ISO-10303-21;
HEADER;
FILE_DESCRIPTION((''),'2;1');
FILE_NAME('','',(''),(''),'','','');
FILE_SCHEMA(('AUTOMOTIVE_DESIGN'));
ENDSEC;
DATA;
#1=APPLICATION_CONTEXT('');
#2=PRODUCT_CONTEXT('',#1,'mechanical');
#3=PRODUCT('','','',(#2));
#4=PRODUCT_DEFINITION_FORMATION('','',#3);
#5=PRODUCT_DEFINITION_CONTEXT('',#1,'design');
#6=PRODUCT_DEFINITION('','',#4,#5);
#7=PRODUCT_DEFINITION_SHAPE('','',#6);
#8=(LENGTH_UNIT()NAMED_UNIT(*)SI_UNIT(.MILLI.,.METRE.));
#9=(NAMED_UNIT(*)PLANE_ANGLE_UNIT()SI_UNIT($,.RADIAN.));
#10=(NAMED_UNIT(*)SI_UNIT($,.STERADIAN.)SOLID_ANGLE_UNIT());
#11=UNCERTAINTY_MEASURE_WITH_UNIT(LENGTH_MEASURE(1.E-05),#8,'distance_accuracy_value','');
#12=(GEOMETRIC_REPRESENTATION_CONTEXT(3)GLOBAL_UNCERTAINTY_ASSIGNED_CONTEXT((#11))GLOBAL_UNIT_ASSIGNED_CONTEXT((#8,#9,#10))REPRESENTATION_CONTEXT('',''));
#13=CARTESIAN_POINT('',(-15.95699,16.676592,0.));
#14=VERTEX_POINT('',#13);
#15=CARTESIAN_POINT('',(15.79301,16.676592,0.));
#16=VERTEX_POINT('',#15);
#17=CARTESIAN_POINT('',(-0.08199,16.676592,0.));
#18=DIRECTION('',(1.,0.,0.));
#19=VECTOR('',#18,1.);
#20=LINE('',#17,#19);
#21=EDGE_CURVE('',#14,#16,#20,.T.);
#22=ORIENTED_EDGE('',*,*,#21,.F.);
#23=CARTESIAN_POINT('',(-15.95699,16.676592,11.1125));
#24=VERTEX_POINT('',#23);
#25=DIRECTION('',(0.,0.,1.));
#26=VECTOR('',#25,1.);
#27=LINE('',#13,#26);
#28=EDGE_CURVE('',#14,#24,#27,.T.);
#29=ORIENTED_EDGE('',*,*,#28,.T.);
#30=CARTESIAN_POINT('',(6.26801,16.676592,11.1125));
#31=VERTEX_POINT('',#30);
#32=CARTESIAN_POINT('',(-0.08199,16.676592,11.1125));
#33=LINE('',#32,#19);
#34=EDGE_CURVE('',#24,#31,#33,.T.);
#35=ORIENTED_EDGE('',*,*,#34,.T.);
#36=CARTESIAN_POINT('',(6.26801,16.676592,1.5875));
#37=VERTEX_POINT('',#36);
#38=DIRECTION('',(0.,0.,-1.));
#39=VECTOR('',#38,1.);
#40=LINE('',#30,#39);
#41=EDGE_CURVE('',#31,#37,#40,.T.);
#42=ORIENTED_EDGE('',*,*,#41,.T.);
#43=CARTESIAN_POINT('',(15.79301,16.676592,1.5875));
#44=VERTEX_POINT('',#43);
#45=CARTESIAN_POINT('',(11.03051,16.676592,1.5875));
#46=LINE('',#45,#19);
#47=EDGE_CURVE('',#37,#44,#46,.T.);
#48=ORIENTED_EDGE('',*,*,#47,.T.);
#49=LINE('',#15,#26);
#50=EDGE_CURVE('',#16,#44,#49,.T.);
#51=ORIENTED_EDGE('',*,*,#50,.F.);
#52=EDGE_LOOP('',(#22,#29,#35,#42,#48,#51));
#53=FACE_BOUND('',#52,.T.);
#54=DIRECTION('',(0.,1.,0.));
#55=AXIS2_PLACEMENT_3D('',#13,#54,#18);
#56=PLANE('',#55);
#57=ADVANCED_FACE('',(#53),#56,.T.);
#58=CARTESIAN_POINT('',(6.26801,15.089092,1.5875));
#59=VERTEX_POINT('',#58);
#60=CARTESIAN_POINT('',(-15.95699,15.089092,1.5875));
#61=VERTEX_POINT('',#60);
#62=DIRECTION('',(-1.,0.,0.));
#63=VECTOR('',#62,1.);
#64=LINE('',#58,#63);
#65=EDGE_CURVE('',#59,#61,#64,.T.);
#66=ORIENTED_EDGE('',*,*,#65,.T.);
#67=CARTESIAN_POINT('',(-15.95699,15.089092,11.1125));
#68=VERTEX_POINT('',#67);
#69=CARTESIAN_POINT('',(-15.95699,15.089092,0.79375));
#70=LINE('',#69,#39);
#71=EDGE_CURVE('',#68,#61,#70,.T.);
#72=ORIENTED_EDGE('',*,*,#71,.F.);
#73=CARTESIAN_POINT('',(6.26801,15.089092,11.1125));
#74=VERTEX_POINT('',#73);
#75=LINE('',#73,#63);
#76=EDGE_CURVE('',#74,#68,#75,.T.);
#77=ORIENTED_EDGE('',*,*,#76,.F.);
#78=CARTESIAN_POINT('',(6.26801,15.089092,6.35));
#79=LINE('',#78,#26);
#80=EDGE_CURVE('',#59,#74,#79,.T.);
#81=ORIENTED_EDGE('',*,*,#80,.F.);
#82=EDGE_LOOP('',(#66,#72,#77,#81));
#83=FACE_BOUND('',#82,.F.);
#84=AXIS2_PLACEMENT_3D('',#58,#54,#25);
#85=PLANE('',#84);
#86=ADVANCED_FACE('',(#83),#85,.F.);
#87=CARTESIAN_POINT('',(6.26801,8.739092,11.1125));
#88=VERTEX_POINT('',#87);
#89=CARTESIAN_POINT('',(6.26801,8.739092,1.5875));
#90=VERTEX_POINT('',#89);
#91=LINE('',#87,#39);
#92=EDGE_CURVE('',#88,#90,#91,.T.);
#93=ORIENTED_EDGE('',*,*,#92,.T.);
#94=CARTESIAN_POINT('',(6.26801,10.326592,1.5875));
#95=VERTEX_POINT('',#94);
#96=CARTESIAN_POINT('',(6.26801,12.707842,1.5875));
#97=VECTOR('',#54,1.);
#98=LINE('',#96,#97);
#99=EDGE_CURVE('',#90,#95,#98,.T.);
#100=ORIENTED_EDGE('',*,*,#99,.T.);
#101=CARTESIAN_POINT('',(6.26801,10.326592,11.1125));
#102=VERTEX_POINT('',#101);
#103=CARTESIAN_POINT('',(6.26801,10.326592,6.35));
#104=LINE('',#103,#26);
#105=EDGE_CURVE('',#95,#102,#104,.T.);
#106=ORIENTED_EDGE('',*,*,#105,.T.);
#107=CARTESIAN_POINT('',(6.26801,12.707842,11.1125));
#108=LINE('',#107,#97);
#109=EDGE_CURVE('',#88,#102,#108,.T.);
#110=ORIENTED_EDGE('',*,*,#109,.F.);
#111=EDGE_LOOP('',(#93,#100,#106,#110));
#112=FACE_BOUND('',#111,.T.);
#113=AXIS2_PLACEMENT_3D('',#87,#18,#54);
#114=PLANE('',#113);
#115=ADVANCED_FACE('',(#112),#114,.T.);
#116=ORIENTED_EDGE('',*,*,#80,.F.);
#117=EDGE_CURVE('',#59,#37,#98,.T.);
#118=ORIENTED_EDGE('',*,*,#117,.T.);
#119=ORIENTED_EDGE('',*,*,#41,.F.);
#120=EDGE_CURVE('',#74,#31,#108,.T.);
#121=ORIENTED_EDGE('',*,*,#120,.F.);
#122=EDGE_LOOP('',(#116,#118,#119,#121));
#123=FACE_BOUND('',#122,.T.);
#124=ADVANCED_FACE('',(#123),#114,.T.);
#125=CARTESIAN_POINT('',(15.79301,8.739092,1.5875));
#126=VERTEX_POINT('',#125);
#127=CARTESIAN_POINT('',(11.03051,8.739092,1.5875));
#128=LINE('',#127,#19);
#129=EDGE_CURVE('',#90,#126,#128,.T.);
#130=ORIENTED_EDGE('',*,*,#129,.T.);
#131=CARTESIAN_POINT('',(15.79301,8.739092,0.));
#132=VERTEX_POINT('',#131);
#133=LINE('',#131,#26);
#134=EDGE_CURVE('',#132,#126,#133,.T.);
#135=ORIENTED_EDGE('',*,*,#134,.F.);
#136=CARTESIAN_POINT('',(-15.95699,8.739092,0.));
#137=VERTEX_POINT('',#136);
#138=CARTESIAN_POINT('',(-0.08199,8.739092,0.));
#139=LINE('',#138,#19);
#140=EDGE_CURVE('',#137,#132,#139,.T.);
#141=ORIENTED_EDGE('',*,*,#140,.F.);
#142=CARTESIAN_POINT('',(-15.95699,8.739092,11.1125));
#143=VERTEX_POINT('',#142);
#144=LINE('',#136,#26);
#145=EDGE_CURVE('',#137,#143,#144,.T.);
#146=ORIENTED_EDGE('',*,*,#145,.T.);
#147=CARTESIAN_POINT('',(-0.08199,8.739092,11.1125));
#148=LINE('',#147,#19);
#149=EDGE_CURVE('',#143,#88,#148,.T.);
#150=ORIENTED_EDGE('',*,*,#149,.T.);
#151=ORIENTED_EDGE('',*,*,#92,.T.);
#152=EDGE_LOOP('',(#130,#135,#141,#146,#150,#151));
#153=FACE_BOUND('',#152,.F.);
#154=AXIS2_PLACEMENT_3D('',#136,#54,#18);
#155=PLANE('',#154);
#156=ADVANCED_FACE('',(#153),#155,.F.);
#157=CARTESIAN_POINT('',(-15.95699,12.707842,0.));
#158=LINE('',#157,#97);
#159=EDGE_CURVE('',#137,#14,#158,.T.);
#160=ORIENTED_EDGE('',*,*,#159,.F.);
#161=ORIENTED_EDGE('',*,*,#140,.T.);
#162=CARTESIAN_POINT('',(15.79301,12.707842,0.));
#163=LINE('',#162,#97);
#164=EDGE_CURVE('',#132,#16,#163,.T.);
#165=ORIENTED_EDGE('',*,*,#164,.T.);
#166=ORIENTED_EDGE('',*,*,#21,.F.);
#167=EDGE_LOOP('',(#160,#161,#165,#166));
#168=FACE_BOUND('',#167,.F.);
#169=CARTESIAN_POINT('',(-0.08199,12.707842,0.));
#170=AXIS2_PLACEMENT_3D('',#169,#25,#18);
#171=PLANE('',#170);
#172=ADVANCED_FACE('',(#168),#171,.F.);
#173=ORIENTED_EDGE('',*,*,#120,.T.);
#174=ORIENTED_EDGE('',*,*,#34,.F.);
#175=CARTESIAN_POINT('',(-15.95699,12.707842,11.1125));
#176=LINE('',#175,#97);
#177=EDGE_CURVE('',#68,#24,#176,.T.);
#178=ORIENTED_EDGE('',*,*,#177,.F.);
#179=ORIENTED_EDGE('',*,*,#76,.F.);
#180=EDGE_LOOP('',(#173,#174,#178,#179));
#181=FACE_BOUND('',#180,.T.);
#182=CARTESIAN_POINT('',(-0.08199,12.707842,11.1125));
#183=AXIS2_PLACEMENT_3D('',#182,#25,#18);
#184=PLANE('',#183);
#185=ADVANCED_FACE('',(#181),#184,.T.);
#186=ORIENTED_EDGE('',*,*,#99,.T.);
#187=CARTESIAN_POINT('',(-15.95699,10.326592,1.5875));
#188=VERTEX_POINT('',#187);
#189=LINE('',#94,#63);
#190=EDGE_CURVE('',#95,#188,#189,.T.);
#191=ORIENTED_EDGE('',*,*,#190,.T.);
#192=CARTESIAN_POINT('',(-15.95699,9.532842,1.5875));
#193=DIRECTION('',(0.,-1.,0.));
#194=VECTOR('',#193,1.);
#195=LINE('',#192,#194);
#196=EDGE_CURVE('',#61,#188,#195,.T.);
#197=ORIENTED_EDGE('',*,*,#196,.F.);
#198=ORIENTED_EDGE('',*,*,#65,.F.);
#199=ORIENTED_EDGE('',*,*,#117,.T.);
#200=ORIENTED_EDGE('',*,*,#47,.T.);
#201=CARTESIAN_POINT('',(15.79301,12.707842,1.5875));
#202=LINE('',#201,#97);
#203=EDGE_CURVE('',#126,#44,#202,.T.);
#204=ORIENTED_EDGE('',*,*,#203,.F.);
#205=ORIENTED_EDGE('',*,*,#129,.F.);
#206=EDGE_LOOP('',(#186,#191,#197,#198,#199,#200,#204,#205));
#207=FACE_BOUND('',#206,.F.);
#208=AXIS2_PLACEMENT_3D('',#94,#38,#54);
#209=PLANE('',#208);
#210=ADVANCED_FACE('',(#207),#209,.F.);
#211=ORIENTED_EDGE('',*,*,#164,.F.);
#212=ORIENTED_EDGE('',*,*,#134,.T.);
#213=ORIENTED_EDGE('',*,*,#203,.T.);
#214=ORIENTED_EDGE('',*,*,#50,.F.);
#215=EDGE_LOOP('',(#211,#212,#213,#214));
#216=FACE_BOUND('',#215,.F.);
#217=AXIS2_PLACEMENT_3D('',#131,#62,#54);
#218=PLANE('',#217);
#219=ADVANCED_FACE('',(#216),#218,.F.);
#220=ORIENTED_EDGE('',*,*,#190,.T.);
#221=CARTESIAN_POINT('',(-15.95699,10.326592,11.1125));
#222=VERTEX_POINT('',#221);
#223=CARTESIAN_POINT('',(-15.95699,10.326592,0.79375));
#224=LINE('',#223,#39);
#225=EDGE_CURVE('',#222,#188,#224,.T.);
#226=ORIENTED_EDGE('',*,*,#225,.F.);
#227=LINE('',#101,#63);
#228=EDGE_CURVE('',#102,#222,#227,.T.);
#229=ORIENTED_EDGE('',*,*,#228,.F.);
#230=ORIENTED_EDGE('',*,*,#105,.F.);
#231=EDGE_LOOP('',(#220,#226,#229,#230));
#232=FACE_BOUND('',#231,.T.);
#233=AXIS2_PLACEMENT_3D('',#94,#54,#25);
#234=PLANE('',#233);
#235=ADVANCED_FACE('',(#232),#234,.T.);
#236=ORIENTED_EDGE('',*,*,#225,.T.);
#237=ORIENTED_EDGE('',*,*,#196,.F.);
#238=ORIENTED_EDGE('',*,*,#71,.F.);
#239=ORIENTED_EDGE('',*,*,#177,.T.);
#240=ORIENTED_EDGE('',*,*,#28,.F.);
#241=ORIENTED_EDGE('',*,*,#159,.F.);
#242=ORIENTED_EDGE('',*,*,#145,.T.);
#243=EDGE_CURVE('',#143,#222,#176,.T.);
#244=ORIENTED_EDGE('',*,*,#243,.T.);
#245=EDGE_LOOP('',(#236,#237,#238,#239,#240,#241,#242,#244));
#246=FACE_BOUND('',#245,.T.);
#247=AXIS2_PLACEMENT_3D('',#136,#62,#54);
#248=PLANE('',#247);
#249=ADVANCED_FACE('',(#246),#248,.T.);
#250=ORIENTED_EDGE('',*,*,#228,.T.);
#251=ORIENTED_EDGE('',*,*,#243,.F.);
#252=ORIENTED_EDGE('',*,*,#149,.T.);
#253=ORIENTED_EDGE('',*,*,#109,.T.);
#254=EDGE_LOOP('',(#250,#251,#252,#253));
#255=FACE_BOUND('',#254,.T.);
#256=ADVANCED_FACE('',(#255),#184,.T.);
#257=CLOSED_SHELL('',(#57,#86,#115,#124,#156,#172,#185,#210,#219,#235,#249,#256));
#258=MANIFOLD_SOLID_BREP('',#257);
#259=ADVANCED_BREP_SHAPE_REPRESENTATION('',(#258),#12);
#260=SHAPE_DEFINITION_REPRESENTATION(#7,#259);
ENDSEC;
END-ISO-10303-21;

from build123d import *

# Parameters (mm, degrees)
F0_W     = 31.75
F0_H     = 7.9375
F1_DEPTH = 11.1125
F2_W     = 9.525
F2_H     = 7.9375
F3_DEPTH = 9.525
F4_W     = 4.7625
F4_H     = 9.525
F5_DEPTH = 22.226


# Not quite as in the source:
# - a length typed as a fraction of an inch, garbled in the dataset ("3 / 203.2 mm" for 3/8 in), is restored


with BuildPart() as f1:
    # F0 (on Top) → F1 (new body)
    with BuildSketch(Plane.XY):
        with Locations((-0.0819904208, 12.7078423367)):
            Rectangle(F0_W, F0_H)
    extrude(amount=F1_DEPTH)

    # F2 (on face) → F3 (cut)
    with BuildSketch(Plane.XY.offset(11.1125)):
        with Locations((11.0305095792, 12.7078423367)):
            Rectangle(F2_W, F2_H)
    extrude(amount=-F3_DEPTH, mode=Mode.SUBTRACT)

    # F4 (on face) → F5 (cut, through all)
    with BuildSketch(Plane.YZ.offset(6.2680095792)):
        with Locations((12.7078423367, 6.35)):
            Rectangle(F4_W, F4_H)
    extrude(amount=-F5_DEPTH, mode=Mode.SUBTRACT)


solid = f1.part
